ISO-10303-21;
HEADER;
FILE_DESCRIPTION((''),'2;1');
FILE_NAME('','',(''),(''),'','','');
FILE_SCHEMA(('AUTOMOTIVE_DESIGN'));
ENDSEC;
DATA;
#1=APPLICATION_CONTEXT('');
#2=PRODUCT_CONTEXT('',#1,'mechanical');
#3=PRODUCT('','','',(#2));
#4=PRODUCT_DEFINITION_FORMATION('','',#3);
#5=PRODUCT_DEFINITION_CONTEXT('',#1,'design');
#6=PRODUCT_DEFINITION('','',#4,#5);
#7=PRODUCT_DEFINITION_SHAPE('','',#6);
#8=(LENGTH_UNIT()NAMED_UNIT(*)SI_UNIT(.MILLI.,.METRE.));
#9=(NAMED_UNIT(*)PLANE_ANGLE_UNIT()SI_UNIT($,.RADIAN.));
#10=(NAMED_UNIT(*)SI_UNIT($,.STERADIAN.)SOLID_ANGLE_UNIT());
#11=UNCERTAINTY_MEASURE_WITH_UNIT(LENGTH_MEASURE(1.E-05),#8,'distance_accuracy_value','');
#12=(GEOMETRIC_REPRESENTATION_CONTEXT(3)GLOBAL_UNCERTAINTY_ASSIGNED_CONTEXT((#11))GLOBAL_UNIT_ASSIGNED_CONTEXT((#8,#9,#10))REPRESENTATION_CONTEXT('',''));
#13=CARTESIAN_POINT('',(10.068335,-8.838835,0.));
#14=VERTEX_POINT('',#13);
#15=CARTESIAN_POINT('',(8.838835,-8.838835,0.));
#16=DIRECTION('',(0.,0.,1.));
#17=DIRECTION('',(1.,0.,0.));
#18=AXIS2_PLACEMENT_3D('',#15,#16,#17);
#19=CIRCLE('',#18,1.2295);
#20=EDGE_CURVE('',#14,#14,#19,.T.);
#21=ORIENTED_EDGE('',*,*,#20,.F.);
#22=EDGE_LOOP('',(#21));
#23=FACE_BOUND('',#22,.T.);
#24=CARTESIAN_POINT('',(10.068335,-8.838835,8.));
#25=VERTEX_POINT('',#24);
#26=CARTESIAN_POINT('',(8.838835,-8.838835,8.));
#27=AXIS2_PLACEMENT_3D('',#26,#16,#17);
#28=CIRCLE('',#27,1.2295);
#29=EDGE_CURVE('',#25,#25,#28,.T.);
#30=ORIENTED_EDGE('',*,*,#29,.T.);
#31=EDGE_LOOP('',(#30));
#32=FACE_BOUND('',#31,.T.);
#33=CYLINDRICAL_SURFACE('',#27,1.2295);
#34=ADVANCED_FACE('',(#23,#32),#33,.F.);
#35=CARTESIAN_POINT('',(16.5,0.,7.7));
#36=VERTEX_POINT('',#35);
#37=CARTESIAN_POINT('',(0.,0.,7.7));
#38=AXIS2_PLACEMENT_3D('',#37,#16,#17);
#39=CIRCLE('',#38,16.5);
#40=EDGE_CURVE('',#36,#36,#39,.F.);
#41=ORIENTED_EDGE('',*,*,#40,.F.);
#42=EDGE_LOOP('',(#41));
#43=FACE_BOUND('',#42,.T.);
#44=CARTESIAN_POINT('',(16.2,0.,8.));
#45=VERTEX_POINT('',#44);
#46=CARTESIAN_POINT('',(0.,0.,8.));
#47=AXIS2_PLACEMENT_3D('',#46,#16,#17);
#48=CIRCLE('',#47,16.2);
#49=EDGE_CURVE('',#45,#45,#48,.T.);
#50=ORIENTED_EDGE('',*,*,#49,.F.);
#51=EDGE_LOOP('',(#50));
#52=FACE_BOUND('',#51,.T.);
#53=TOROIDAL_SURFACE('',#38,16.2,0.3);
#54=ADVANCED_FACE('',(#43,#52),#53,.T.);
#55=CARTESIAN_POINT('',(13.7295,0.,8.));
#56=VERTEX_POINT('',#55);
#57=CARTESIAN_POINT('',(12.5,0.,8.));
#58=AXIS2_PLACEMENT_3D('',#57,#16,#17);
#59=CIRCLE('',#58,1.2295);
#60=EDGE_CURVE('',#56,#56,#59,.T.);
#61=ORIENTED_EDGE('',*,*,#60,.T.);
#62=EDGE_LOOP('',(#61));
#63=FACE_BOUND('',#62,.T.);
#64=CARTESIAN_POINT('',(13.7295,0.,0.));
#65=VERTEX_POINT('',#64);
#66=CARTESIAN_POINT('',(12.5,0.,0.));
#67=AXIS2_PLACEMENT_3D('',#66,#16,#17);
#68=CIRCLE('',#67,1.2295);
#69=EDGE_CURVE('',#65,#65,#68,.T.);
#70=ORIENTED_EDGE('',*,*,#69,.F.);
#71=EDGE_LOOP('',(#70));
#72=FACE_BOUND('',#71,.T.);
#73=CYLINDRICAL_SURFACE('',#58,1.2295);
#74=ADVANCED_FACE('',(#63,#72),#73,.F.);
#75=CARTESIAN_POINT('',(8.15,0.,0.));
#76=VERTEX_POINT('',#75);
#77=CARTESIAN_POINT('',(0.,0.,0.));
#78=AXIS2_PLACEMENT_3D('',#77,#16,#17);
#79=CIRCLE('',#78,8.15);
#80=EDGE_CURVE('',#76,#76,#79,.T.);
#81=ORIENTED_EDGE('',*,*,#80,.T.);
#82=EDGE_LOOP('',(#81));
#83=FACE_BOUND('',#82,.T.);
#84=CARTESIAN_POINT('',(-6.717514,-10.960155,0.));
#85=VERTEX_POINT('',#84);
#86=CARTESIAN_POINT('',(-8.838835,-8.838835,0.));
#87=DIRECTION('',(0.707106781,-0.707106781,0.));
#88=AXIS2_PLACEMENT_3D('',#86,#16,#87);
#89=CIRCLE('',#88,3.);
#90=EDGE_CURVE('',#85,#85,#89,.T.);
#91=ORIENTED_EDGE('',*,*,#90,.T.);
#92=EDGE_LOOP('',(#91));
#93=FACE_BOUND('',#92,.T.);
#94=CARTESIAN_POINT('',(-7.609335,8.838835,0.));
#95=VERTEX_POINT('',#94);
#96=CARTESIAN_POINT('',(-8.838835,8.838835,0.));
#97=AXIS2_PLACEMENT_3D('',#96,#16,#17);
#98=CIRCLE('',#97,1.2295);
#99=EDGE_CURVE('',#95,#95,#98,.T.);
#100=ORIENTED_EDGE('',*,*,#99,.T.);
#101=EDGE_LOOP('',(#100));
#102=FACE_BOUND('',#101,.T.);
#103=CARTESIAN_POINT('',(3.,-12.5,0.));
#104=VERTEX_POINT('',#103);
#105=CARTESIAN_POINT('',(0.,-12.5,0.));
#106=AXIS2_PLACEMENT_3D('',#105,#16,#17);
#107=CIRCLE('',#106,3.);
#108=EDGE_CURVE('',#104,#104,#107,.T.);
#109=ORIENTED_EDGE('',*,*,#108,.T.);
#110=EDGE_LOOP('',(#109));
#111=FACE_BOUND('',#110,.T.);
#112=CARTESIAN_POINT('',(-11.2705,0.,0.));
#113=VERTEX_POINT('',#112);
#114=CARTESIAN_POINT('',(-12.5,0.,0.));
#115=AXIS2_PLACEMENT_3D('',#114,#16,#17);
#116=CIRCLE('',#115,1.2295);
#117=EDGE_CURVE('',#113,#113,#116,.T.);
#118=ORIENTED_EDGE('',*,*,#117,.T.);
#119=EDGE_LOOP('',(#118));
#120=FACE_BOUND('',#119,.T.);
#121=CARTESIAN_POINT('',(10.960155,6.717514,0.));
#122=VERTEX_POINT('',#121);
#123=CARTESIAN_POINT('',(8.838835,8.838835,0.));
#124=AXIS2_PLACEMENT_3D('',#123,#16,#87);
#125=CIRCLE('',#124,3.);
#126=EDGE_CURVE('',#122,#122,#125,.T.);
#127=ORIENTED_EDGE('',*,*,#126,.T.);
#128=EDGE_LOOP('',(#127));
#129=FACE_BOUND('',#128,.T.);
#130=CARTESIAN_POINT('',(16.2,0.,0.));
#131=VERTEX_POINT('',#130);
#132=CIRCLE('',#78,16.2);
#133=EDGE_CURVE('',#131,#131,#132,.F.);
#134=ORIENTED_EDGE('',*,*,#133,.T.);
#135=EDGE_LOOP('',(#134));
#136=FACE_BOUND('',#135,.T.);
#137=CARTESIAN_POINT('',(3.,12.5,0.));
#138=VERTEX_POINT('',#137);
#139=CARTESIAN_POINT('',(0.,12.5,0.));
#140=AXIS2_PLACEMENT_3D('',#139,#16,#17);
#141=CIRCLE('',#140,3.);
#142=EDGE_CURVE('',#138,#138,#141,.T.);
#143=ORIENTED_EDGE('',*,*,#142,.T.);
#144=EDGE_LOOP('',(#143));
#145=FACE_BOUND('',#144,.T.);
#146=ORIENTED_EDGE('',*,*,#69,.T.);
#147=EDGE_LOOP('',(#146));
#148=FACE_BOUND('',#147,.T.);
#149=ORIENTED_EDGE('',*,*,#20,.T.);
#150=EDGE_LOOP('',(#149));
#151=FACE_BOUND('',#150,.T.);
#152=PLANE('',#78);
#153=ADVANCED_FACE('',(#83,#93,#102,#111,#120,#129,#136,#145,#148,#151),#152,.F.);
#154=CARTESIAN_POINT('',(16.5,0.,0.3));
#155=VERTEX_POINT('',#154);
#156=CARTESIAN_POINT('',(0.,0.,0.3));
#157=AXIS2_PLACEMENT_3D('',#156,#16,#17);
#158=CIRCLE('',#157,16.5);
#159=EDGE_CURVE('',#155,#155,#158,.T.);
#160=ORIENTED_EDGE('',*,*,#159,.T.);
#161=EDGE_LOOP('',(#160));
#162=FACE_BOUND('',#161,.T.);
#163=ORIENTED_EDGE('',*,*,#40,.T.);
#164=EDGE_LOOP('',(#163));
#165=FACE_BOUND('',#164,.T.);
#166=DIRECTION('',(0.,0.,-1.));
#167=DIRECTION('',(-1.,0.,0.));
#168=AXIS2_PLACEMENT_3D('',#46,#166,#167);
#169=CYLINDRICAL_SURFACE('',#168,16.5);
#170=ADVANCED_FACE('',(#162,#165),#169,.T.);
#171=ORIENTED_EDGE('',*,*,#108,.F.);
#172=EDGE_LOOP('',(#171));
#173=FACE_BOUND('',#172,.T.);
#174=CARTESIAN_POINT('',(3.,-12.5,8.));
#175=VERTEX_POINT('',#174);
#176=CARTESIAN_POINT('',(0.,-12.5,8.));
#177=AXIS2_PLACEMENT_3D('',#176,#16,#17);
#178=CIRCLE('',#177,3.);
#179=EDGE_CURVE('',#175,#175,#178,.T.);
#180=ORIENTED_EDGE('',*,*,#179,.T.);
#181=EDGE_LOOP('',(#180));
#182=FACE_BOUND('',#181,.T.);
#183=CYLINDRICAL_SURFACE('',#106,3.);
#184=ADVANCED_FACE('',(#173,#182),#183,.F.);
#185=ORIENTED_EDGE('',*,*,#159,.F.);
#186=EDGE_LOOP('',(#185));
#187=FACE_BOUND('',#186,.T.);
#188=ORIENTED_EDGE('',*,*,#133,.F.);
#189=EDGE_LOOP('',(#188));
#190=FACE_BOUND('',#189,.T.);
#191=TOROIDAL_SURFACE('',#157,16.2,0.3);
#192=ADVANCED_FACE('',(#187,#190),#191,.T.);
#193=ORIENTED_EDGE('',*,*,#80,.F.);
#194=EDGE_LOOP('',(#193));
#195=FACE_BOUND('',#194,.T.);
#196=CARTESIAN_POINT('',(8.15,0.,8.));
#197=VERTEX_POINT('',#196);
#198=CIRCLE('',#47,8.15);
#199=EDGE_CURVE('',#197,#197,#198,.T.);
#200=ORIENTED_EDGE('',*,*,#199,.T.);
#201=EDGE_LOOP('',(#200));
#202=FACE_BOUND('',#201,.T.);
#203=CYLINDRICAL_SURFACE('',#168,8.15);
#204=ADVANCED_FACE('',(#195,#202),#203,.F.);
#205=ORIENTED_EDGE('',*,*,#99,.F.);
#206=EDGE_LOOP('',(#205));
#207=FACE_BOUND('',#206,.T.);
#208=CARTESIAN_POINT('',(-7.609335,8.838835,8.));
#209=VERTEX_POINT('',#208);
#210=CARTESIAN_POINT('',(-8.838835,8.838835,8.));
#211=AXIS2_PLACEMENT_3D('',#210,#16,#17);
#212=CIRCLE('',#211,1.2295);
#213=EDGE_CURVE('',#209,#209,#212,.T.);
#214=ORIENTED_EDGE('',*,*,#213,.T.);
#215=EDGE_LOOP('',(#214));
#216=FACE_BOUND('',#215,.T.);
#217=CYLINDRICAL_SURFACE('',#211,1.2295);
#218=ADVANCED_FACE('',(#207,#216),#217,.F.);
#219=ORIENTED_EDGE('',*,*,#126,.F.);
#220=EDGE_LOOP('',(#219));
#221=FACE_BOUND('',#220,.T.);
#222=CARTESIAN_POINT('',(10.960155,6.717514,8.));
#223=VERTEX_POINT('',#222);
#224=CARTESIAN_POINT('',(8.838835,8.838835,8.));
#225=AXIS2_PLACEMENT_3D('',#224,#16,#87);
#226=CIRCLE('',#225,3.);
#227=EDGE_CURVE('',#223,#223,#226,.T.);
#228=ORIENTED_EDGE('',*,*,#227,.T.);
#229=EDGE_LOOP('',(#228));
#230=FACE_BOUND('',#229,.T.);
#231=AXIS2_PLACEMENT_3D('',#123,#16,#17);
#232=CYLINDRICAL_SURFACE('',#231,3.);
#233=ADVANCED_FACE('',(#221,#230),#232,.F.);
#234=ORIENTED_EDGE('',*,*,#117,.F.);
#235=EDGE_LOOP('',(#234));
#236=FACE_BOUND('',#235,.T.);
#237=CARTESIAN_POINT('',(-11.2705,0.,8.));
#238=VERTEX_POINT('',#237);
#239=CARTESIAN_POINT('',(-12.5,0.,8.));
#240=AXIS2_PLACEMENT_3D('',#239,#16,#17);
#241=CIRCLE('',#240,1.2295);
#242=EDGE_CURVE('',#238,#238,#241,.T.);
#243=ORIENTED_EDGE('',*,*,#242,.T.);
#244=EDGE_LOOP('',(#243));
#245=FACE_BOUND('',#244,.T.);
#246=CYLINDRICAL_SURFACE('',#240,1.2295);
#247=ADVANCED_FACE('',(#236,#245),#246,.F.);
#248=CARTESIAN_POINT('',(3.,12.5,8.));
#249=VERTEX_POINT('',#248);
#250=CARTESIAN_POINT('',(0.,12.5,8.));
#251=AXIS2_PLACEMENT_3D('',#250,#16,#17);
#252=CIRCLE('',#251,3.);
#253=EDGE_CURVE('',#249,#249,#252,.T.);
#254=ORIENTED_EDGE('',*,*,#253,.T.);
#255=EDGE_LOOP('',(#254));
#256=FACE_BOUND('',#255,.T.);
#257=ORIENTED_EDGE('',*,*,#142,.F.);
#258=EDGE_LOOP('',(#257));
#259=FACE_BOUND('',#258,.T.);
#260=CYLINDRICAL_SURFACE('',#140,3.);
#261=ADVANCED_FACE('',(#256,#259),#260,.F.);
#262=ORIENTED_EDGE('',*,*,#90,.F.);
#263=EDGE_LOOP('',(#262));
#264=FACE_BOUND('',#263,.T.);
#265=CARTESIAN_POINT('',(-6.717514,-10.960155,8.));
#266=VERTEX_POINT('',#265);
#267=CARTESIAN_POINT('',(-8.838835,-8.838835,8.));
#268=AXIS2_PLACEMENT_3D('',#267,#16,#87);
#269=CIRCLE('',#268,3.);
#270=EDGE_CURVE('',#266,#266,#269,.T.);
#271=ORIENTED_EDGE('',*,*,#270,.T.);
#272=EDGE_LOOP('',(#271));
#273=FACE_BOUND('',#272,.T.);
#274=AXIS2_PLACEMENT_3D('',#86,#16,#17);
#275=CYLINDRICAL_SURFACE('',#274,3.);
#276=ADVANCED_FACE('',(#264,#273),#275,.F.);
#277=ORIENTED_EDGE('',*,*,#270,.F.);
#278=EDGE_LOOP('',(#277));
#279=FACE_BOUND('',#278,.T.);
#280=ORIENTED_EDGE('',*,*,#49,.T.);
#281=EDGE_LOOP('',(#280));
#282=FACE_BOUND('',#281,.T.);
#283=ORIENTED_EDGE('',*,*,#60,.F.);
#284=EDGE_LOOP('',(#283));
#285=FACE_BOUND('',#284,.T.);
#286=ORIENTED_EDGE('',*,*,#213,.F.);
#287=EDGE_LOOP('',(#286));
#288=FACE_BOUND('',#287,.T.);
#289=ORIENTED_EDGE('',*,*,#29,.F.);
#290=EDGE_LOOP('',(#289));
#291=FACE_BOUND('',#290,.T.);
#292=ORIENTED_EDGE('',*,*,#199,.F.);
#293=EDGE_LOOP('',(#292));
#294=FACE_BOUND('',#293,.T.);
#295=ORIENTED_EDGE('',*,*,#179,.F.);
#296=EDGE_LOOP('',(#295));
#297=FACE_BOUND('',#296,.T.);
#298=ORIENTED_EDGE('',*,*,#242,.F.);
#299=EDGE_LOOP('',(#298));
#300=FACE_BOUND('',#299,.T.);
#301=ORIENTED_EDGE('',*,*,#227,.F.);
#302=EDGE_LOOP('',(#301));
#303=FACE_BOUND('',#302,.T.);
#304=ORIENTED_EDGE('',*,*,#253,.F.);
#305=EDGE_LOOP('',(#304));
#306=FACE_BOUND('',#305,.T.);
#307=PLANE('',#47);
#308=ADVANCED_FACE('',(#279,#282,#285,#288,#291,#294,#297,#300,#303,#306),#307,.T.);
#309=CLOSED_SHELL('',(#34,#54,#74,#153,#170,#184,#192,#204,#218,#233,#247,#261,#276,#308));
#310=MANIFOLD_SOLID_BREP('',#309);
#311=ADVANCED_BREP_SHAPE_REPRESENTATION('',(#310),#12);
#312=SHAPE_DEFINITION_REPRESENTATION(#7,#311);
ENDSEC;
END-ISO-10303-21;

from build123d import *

# Parameters (mm, degrees)
SKETCH1_R           = 16.5
SKETCH1_R_2         = 8.15
BOSS_EXTRUDE1_DEPTH = 8
SKETCH2_R           = 3
CUT_EXTRUDE1_DEPTH  = 25.667792767
TAP1_D              = 2.459
CIRPATTERN11_COUNT  = 2
CIRPATTERN11_ANGLE  = 45
FILLET1_R           = 0.3


with BuildPart() as part:
    # Sketch1 → Boss-Extrude1 (new body)
    with BuildSketch(Plane.XY):
        Circle(SKETCH1_R)
        Circle(SKETCH1_R_2, mode=Mode.SUBTRACT)
    extrude(amount=BOSS_EXTRUDE1_DEPTH)

    # Sketch2 → Cut-Extrude1 (cut, through all)
    with BuildSketch(Plane.XY.offset(8)):
        with Locations((0, 12.5)):
            Circle(SKETCH2_R)
        with Locations((0, -12.5)):
            Circle(SKETCH2_R)
    cut_extrude1 = extrude(amount=-CUT_EXTRUDE1_DEPTH, mode=Mode.SUBTRACT)

    # Tap1 (through all)
    with Locations(Plane.XY.offset(8)):
        with Locations((-12.5, 0), (12.5, 0)):
            tap1 = Hole(TAP1_D / 2)

    # CirPattern11: Cut-Extrude1, Tap1 ×2 about axis
    cirpattern11_axis = Axis((0, 0, -0.15), (0, 0, -1))
    add([cut_extrude1.rotate(cirpattern11_axis, i * CIRPATTERN11_ANGLE / (CIRPATTERN11_COUNT - 1)) for i in range(1, CIRPATTERN11_COUNT)], mode=Mode.SUBTRACT)
    add([tap1.rotate(cirpattern11_axis, i * CIRPATTERN11_ANGLE / (CIRPATTERN11_COUNT - 1)) for i in range(1, CIRPATTERN11_COUNT)], mode=Mode.SUBTRACT)

    # Fillet1
    fillet1_edges = [part.edges().sort_by_distance(p)[0] for p in [
        (-16.5, 0, 0),
        (-16.5, 0, 8),
    ]]
    fillet(fillet1_edges, radius=FILLET1_R)


solid = part.part
